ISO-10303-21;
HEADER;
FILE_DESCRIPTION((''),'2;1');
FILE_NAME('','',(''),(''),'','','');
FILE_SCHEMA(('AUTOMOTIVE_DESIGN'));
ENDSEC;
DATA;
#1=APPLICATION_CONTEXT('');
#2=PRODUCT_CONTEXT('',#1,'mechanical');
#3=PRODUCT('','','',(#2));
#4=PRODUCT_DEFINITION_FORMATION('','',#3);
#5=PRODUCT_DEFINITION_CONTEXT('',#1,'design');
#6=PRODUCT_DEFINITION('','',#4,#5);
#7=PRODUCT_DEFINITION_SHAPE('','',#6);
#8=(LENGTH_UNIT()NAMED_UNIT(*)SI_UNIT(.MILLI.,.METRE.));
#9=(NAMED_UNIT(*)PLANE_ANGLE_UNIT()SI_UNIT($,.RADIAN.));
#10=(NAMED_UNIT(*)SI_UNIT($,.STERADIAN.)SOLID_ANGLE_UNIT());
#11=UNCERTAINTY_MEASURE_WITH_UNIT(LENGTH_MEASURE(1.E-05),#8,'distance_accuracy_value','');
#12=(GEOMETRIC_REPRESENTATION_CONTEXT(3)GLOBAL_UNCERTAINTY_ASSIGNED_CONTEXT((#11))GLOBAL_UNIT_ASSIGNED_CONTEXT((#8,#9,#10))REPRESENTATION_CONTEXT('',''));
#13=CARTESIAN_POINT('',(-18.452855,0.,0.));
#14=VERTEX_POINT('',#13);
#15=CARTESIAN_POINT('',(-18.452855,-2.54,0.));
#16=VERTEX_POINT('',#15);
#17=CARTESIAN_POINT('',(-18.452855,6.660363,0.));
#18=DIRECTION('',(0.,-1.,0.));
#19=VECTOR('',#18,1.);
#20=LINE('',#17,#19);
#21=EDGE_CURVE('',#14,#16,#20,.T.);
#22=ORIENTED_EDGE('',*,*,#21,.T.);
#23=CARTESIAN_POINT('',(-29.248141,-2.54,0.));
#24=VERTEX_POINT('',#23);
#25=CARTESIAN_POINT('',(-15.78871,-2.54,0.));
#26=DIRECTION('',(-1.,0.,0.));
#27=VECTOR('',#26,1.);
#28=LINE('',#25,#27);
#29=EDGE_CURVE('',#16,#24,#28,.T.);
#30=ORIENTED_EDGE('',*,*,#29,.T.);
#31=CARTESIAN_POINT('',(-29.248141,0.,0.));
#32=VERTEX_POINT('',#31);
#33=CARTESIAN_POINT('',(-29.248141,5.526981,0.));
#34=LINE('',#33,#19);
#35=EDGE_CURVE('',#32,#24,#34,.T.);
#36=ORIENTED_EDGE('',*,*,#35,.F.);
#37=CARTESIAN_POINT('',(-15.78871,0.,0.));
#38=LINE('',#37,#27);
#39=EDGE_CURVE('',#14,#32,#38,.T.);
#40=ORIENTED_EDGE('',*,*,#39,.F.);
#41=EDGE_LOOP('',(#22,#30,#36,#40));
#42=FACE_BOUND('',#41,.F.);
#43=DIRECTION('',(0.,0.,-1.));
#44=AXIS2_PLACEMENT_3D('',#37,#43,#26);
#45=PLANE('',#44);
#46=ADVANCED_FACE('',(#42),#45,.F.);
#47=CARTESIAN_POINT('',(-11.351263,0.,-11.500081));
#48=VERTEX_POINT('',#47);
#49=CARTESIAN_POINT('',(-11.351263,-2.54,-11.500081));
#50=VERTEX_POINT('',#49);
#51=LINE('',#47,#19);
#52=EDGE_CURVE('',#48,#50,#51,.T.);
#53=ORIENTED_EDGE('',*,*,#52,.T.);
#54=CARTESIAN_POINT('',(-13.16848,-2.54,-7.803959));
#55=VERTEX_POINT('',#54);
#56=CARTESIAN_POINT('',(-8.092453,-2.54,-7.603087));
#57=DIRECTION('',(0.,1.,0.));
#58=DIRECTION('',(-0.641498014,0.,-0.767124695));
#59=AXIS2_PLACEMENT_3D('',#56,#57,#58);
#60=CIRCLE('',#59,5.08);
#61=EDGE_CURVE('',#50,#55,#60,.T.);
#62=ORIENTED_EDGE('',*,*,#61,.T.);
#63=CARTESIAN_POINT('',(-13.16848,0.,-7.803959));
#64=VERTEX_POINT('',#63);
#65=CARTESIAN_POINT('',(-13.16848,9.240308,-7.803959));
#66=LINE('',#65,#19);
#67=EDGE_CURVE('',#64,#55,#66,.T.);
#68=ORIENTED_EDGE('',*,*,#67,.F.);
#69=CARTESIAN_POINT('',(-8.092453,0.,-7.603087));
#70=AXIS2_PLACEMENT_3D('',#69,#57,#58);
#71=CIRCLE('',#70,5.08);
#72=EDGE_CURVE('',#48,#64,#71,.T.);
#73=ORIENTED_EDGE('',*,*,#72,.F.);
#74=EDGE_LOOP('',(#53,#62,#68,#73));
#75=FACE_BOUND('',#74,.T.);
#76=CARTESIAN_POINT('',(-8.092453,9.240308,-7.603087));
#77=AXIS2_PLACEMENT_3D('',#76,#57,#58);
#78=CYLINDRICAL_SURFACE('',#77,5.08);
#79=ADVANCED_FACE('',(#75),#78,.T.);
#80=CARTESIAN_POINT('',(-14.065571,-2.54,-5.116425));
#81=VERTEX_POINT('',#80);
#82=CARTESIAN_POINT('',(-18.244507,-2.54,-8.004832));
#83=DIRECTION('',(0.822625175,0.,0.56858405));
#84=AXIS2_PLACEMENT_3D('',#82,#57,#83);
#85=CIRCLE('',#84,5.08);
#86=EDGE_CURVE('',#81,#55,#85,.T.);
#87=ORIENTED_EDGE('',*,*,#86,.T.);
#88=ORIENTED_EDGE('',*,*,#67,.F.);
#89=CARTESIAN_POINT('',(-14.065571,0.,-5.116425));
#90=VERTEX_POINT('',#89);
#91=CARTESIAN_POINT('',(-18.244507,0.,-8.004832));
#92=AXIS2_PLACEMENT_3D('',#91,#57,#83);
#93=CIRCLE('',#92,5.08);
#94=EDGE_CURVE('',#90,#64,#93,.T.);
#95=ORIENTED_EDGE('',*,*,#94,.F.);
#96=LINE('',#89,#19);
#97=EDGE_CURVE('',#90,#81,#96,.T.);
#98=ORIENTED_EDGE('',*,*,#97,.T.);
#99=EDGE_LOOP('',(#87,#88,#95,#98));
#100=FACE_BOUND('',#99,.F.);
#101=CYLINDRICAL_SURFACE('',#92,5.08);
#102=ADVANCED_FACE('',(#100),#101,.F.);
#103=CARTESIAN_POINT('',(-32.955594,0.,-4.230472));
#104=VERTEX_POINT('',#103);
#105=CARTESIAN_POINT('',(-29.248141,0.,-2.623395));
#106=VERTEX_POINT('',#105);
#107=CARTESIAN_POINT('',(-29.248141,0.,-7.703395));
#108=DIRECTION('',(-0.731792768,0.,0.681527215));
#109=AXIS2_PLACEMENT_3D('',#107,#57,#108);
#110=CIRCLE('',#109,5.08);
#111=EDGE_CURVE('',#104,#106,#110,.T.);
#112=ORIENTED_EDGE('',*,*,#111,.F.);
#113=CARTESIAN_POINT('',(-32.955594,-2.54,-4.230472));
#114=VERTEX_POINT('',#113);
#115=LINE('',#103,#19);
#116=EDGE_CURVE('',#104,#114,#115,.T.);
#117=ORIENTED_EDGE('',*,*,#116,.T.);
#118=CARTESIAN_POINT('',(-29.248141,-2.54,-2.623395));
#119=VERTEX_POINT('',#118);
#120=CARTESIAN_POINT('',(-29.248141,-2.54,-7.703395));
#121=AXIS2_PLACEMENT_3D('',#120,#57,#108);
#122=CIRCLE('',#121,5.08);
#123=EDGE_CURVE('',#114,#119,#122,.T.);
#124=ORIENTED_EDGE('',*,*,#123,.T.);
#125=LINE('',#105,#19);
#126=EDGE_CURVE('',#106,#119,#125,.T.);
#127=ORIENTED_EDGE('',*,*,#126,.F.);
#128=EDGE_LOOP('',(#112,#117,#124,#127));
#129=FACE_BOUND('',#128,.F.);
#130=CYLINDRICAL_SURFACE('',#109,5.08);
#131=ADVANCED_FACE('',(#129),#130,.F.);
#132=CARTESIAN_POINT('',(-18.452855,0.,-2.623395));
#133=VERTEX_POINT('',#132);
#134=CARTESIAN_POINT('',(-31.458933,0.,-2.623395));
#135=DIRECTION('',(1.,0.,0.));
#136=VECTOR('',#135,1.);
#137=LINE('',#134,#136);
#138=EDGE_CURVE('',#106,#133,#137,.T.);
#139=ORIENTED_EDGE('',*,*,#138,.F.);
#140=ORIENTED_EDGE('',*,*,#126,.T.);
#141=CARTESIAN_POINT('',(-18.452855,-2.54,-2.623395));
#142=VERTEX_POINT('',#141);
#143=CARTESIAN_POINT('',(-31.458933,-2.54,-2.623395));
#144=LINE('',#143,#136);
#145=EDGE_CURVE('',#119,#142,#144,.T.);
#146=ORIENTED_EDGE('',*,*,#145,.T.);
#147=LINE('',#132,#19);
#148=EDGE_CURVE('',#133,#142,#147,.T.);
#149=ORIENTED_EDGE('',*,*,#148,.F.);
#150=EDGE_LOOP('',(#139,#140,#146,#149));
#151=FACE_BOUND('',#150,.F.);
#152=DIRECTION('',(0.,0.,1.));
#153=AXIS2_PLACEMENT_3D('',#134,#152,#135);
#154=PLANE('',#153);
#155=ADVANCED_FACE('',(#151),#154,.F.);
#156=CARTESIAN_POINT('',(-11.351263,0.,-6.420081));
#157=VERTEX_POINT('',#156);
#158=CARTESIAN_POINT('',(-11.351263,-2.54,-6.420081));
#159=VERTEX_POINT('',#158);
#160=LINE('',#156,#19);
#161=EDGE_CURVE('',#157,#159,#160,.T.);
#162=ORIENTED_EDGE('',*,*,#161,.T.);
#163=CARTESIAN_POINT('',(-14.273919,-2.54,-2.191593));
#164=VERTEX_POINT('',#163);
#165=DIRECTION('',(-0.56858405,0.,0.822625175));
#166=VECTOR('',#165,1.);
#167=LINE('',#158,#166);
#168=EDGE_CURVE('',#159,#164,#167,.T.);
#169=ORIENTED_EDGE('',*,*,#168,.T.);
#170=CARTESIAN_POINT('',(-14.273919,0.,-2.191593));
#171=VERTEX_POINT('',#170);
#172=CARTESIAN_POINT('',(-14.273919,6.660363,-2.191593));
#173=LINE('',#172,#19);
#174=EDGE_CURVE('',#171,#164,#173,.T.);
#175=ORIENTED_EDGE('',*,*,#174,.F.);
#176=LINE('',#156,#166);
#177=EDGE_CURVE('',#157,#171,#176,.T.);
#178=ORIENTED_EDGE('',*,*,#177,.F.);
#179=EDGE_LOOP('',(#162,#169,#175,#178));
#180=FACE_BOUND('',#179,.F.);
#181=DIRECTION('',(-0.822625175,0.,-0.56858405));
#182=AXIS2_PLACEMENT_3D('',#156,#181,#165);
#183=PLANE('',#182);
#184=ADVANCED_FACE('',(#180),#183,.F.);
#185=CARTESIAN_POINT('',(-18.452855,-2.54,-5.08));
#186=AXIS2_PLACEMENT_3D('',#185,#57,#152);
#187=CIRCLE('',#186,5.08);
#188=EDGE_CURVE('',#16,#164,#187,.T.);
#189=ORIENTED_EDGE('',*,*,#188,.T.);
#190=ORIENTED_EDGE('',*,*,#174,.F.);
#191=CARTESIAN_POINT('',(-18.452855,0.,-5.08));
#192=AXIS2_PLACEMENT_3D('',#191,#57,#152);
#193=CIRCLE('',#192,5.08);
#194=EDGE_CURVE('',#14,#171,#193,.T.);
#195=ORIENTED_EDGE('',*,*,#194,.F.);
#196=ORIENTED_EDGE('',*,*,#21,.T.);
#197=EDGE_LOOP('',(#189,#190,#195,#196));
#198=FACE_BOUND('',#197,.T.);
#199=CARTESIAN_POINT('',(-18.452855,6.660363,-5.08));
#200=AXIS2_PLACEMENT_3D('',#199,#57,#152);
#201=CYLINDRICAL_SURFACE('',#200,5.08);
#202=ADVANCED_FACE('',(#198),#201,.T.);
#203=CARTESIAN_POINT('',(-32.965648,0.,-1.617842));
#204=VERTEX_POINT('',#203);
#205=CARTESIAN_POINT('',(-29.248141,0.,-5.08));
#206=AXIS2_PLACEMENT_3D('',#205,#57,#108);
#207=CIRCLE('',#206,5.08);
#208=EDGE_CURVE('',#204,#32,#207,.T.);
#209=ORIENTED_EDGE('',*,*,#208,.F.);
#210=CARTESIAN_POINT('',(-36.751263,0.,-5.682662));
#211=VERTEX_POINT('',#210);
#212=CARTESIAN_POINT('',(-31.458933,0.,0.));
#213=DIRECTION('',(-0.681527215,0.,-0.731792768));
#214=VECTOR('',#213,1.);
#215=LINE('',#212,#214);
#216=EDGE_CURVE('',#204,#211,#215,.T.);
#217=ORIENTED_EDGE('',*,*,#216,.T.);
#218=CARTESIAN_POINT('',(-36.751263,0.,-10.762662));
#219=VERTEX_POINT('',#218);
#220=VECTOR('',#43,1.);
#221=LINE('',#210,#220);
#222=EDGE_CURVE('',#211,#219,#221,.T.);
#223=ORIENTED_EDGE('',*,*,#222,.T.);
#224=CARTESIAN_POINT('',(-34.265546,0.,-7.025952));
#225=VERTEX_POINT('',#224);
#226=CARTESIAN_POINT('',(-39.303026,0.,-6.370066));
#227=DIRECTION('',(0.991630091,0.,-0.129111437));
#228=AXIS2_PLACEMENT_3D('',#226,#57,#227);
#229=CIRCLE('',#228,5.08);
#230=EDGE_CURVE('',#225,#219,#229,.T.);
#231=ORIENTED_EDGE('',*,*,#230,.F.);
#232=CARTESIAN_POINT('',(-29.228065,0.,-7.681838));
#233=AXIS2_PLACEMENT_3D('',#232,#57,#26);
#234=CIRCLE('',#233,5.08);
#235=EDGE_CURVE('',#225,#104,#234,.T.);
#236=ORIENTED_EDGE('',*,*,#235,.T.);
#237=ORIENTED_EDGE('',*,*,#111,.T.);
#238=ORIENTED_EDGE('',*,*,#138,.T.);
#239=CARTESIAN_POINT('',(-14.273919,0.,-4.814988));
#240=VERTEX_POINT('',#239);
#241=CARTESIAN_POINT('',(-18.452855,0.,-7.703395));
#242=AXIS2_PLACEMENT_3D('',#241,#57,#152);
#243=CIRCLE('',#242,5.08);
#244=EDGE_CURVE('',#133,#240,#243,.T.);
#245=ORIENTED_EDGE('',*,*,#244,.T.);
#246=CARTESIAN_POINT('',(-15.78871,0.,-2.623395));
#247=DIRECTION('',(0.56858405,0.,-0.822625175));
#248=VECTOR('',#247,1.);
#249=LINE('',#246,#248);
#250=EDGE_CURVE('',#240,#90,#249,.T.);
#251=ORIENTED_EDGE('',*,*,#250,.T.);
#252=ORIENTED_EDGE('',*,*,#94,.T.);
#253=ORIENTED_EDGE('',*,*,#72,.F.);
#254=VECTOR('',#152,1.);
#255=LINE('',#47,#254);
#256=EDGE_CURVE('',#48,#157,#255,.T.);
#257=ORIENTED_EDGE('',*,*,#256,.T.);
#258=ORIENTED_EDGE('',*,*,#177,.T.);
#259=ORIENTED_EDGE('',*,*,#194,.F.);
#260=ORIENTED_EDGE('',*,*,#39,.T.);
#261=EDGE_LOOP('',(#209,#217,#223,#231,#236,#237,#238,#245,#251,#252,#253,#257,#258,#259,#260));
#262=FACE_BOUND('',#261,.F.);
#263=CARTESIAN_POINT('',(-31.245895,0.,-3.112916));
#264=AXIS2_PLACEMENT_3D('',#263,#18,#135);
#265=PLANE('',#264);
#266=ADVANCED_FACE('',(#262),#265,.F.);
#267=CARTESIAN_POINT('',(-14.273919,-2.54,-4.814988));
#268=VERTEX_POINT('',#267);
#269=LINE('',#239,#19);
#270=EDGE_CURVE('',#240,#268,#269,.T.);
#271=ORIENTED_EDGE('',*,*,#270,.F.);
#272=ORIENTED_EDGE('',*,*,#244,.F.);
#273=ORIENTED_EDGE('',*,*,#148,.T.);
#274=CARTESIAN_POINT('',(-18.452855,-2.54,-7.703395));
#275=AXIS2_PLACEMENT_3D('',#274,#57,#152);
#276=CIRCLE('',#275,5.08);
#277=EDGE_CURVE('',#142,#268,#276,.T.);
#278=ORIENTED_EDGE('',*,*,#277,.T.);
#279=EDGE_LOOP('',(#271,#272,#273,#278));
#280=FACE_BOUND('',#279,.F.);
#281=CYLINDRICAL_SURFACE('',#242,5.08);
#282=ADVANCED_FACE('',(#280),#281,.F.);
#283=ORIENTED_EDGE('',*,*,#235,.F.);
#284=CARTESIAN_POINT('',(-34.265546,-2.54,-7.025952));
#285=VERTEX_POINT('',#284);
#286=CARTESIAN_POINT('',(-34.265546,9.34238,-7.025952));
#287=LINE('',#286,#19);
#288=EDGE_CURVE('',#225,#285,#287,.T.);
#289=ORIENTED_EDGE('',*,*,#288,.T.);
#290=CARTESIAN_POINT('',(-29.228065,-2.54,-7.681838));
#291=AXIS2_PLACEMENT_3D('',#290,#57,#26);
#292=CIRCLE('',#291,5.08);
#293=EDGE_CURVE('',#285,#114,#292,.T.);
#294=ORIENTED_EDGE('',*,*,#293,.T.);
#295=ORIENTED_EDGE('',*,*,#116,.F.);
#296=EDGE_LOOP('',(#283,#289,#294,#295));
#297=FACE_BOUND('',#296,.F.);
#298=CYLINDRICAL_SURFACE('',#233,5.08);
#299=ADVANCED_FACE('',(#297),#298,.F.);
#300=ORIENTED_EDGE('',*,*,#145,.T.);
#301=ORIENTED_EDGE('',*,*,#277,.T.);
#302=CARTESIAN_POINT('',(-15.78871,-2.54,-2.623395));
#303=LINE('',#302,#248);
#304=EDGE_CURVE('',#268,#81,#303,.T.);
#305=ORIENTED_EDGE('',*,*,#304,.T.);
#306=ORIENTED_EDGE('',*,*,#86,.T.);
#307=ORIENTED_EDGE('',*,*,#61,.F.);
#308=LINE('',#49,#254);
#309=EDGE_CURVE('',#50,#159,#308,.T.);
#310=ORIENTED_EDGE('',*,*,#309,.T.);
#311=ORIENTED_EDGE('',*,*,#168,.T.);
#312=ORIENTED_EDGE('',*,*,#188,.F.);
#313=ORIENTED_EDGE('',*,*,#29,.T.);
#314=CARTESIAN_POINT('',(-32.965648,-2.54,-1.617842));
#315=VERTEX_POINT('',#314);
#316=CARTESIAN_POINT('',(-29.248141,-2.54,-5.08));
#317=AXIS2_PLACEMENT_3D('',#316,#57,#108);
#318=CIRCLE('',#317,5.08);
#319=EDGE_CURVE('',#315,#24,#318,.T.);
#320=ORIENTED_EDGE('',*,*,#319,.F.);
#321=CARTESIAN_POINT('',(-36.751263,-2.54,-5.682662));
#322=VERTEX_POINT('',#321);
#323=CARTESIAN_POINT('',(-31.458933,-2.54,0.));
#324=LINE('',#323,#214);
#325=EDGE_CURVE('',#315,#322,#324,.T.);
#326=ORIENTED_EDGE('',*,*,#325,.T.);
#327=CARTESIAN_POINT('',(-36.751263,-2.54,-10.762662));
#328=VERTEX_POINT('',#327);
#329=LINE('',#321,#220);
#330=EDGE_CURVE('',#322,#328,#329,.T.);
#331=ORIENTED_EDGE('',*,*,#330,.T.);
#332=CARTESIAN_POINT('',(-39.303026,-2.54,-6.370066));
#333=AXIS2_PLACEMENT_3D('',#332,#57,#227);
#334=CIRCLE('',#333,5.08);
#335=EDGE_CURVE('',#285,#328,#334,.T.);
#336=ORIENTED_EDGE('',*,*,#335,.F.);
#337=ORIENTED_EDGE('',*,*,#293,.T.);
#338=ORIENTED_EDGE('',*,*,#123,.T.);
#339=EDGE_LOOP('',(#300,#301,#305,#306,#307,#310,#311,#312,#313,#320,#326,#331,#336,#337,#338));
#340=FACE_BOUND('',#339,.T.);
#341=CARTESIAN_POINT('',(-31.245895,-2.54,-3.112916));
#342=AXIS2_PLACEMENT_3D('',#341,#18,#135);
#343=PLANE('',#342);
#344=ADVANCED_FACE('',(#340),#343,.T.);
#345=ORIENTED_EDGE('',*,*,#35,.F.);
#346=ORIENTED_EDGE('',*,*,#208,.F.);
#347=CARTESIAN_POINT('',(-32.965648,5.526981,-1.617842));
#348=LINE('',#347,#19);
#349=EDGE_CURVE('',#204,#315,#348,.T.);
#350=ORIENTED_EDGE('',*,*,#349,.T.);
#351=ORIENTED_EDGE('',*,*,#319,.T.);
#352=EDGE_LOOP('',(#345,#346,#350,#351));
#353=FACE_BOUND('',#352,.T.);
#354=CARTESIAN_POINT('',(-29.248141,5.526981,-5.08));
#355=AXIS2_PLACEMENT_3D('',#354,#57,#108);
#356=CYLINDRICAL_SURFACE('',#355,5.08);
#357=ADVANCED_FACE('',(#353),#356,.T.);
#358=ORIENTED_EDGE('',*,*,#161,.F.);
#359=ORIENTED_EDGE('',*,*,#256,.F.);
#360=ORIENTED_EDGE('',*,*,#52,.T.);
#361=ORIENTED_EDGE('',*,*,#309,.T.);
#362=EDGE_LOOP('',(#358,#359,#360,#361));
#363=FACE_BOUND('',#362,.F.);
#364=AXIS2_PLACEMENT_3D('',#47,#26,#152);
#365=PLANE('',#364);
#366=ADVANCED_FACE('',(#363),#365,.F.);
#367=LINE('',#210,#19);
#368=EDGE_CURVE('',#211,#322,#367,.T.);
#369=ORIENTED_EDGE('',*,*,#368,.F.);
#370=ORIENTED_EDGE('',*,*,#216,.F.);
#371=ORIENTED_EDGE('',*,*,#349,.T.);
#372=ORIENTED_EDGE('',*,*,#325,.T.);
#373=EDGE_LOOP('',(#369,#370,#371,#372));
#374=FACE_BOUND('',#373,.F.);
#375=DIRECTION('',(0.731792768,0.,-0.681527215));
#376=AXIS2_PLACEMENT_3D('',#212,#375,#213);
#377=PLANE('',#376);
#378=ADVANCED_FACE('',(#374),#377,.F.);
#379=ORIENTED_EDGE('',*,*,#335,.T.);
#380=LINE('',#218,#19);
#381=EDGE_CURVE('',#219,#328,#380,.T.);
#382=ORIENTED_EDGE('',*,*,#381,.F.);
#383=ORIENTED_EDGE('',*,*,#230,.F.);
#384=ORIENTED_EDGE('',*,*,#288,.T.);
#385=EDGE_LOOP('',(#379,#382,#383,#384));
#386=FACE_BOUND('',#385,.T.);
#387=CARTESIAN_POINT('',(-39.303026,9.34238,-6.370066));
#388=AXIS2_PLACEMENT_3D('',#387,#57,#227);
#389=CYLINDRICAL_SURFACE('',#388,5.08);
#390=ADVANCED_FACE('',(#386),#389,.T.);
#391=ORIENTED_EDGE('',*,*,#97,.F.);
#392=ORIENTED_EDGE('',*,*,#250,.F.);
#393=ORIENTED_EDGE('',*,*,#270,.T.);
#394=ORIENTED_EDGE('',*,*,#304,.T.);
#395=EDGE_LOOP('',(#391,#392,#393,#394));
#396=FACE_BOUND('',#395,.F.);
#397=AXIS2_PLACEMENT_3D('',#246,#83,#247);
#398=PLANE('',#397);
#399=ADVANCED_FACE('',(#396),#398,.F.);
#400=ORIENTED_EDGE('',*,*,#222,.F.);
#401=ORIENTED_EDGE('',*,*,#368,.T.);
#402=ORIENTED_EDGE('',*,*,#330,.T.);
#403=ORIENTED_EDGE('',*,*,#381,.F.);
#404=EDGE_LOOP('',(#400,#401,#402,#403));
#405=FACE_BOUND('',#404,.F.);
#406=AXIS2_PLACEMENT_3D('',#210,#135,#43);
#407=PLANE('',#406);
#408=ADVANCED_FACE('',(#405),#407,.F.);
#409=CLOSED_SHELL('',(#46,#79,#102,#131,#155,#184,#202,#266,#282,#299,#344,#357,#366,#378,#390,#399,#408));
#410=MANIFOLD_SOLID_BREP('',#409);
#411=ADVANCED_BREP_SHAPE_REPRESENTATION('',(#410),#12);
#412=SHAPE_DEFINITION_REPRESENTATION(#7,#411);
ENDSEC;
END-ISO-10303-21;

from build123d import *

# Parameters (mm, degrees)
F1_DEPTH    = 2.54
F2_T1_DEPTH = 2.54
F2_T3_DEPTH = 13.5939610314
F2_T5_DEPTH = 15.8607267087
F3_T1_DEPTH = 21.0206169328
F3_T3_DEPTH = 21.2247608177


# Not quite as in the source:
# - a fillet or chamfer that OpenCascade refuses, or shapes differently, is made with other operations: its cross-section is extruded or revolved along the edge and cut away or added


with BuildPart() as f1:
    # F0 (on Front) → F1 (new body)
    with BuildSketch(Plane.XZ):
        Polygon((-31.4589329064, 0), (-36.7512629041, -5.6826620174), (-36.7512629041, -10.7626620174), (-34.308064729, -10.7626620174), (-34.308064729, -5.6826620174), (-31.4589329064, -2.6233945118), (-15.7887097448, -2.6233945118), (-13.1645070408, -6.4200807009), (-13.1645070408, -11.5000807009), (-11.3512629041, -11.5000807009), (-11.3512629041, -6.4200807009), (-15.7887097448, 0), align=None)
    extrude(amount=F1_DEPTH)

    # F2: fillet of radius 5.08 on 6 edges, made by hand

    # F2_s2 → F2_t1 (join)
    with BuildSketch(Plane.XZ):
        with BuildLine():
            ThreePointArc((-32.9656479615, -4.2412362599), (-31.2752859934, -3.0453818498), (-29.2481407001, -2.6233945118))
            Line((-29.2481407001, -2.6233945118), (-31.4589329064, -2.6233945118))
            Line((-31.4589329064, -2.6233945118), (-32.9656479615, -4.2412362599))
        make_face()
        with BuildLine():
            ThreePointArc((-18.4528550865, -2.6233945118), (-16.0934809554, -3.2045331326), (-14.2739191976, -4.8149875397))
            Line((-14.2739191976, -4.8149875397), (-15.7887097448, -2.6233945118))
            Line((-15.7887097448, -2.6233945118), (-18.4528550865, -2.6233945118))
        make_face()
        with BuildLine():
            ThreePointArc((-14.0655711519, -5.1164246759), (-13.3950022045, -6.4919857066), (-13.1645070408, -8.0048316479))
            Line((-13.1645070408, -8.0048316479), (-13.1645070408, -6.4200807009))
            Line((-13.1645070408, -6.4200807009), (-14.0655711519, -5.1164246759))
        make_face()
        with BuildLine():
            ThreePointArc((-34.308064729, -7.6818378518), (-33.9551852525, -5.8215336949), (-32.9455719904, -4.2196795999))
            Line((-32.9455719904, -4.2196795999), (-34.308064729, -5.6826620174))
            Line((-34.308064729, -5.6826620174), (-34.308064729, -7.6818378518))
        make_face()
    extrude(amount=F2_T1_DEPTH)

    # F2_s4 → F2_t3 (cut)
    with BuildSketch(Plane.XZ.offset(-5.5269805157)):
        with BuildLine():
            ThreePointArc((-32.9656479615, -1.6178417481), (-31.2752859934, -0.421987338), (-29.2481407001, 0))
            Line((-29.2481407001, 0), (-31.4589329064, 0))
            Line((-31.4589329064, 0), (-32.9656479615, -1.6178417481))
        make_face()
    extrude(amount=F2_T3_DEPTH, mode=Mode.SUBTRACT)

    # F2_s6 → F2_t5 (cut)
    with BuildSketch(Plane.XZ.offset(-6.6603633543)):
        with BuildLine():
            ThreePointArc((-18.4528550865, 0), (-16.0934809554, -0.5811386208), (-14.2739191976, -2.1915930279))
            Line((-14.2739191976, -2.1915930279), (-15.7887097448, 0))
            Line((-15.7887097448, 0), (-18.4528550865, 0))
        make_face()
    extrude(amount=F2_T5_DEPTH, mode=Mode.SUBTRACT)

    # F3: fillet of radius 5.08 on 2 edges, made by hand

    # F3_s2 → F3_t1 (cut)
    with BuildSketch(Plane.XZ.offset(-9.2403084664)):
        with BuildLine():
            ThreePointArc((-11.3512629041, -11.5000807009), (-12.6512581821, -9.8444473796), (-13.1684800157, -7.8039594497))
            Line((-13.1684800157, -7.8039594497), (-13.6760827182, -7.8240466695))
            ThreePointArc((-13.6760827182, -7.8240466695), (-13.6725070408, -8.0048316479), (-13.6725070408, -11.5000807009))
            Line((-13.6725070408, -11.5000807009), (-13.1645070408, -12.0080807009))
            ThreePointArc((-13.1645070408, -12.0080807009), (-12.2578849724, -12.0080807009), (-11.6771438954, -11.8897800459))
            Line((-11.6771438954, -11.8897800459), (-11.3512629041, -11.5000807009))
        make_face()
    extrude(amount=F3_T1_DEPTH, mode=Mode.SUBTRACT)

    # F3_s4 → F3_t3 (cut)
    with BuildSketch(Plane.XZ.offset(-9.3423804089)):
        with BuildLine():
            ThreePointArc((-34.2655455901, -7.0259517536), (-35.0733800628, -9.183691684), (-36.7512629041, -10.7626620174))
            Line((-36.7512629041, -10.7626620174), (-36.4960865494, -11.2019216536))
            ThreePointArc((-36.4960865494, -11.2019216536), (-35.5296638165, -11.2706620174), (-34.308064729, -11.2706620174))
            Line((-34.308064729, -11.2706620174), (-33.800064729, -10.7626620174))
            ThreePointArc((-33.800064729, -10.7626620174), (-33.800064729, -7.6818378518), (-33.761797504, -7.0915403635))
            Line((-33.761797504, -7.0915403635), (-34.2655455901, -7.0259517536))
        make_face()
    extrude(amount=F3_T3_DEPTH, mode=Mode.SUBTRACT)


solid = f1.part
